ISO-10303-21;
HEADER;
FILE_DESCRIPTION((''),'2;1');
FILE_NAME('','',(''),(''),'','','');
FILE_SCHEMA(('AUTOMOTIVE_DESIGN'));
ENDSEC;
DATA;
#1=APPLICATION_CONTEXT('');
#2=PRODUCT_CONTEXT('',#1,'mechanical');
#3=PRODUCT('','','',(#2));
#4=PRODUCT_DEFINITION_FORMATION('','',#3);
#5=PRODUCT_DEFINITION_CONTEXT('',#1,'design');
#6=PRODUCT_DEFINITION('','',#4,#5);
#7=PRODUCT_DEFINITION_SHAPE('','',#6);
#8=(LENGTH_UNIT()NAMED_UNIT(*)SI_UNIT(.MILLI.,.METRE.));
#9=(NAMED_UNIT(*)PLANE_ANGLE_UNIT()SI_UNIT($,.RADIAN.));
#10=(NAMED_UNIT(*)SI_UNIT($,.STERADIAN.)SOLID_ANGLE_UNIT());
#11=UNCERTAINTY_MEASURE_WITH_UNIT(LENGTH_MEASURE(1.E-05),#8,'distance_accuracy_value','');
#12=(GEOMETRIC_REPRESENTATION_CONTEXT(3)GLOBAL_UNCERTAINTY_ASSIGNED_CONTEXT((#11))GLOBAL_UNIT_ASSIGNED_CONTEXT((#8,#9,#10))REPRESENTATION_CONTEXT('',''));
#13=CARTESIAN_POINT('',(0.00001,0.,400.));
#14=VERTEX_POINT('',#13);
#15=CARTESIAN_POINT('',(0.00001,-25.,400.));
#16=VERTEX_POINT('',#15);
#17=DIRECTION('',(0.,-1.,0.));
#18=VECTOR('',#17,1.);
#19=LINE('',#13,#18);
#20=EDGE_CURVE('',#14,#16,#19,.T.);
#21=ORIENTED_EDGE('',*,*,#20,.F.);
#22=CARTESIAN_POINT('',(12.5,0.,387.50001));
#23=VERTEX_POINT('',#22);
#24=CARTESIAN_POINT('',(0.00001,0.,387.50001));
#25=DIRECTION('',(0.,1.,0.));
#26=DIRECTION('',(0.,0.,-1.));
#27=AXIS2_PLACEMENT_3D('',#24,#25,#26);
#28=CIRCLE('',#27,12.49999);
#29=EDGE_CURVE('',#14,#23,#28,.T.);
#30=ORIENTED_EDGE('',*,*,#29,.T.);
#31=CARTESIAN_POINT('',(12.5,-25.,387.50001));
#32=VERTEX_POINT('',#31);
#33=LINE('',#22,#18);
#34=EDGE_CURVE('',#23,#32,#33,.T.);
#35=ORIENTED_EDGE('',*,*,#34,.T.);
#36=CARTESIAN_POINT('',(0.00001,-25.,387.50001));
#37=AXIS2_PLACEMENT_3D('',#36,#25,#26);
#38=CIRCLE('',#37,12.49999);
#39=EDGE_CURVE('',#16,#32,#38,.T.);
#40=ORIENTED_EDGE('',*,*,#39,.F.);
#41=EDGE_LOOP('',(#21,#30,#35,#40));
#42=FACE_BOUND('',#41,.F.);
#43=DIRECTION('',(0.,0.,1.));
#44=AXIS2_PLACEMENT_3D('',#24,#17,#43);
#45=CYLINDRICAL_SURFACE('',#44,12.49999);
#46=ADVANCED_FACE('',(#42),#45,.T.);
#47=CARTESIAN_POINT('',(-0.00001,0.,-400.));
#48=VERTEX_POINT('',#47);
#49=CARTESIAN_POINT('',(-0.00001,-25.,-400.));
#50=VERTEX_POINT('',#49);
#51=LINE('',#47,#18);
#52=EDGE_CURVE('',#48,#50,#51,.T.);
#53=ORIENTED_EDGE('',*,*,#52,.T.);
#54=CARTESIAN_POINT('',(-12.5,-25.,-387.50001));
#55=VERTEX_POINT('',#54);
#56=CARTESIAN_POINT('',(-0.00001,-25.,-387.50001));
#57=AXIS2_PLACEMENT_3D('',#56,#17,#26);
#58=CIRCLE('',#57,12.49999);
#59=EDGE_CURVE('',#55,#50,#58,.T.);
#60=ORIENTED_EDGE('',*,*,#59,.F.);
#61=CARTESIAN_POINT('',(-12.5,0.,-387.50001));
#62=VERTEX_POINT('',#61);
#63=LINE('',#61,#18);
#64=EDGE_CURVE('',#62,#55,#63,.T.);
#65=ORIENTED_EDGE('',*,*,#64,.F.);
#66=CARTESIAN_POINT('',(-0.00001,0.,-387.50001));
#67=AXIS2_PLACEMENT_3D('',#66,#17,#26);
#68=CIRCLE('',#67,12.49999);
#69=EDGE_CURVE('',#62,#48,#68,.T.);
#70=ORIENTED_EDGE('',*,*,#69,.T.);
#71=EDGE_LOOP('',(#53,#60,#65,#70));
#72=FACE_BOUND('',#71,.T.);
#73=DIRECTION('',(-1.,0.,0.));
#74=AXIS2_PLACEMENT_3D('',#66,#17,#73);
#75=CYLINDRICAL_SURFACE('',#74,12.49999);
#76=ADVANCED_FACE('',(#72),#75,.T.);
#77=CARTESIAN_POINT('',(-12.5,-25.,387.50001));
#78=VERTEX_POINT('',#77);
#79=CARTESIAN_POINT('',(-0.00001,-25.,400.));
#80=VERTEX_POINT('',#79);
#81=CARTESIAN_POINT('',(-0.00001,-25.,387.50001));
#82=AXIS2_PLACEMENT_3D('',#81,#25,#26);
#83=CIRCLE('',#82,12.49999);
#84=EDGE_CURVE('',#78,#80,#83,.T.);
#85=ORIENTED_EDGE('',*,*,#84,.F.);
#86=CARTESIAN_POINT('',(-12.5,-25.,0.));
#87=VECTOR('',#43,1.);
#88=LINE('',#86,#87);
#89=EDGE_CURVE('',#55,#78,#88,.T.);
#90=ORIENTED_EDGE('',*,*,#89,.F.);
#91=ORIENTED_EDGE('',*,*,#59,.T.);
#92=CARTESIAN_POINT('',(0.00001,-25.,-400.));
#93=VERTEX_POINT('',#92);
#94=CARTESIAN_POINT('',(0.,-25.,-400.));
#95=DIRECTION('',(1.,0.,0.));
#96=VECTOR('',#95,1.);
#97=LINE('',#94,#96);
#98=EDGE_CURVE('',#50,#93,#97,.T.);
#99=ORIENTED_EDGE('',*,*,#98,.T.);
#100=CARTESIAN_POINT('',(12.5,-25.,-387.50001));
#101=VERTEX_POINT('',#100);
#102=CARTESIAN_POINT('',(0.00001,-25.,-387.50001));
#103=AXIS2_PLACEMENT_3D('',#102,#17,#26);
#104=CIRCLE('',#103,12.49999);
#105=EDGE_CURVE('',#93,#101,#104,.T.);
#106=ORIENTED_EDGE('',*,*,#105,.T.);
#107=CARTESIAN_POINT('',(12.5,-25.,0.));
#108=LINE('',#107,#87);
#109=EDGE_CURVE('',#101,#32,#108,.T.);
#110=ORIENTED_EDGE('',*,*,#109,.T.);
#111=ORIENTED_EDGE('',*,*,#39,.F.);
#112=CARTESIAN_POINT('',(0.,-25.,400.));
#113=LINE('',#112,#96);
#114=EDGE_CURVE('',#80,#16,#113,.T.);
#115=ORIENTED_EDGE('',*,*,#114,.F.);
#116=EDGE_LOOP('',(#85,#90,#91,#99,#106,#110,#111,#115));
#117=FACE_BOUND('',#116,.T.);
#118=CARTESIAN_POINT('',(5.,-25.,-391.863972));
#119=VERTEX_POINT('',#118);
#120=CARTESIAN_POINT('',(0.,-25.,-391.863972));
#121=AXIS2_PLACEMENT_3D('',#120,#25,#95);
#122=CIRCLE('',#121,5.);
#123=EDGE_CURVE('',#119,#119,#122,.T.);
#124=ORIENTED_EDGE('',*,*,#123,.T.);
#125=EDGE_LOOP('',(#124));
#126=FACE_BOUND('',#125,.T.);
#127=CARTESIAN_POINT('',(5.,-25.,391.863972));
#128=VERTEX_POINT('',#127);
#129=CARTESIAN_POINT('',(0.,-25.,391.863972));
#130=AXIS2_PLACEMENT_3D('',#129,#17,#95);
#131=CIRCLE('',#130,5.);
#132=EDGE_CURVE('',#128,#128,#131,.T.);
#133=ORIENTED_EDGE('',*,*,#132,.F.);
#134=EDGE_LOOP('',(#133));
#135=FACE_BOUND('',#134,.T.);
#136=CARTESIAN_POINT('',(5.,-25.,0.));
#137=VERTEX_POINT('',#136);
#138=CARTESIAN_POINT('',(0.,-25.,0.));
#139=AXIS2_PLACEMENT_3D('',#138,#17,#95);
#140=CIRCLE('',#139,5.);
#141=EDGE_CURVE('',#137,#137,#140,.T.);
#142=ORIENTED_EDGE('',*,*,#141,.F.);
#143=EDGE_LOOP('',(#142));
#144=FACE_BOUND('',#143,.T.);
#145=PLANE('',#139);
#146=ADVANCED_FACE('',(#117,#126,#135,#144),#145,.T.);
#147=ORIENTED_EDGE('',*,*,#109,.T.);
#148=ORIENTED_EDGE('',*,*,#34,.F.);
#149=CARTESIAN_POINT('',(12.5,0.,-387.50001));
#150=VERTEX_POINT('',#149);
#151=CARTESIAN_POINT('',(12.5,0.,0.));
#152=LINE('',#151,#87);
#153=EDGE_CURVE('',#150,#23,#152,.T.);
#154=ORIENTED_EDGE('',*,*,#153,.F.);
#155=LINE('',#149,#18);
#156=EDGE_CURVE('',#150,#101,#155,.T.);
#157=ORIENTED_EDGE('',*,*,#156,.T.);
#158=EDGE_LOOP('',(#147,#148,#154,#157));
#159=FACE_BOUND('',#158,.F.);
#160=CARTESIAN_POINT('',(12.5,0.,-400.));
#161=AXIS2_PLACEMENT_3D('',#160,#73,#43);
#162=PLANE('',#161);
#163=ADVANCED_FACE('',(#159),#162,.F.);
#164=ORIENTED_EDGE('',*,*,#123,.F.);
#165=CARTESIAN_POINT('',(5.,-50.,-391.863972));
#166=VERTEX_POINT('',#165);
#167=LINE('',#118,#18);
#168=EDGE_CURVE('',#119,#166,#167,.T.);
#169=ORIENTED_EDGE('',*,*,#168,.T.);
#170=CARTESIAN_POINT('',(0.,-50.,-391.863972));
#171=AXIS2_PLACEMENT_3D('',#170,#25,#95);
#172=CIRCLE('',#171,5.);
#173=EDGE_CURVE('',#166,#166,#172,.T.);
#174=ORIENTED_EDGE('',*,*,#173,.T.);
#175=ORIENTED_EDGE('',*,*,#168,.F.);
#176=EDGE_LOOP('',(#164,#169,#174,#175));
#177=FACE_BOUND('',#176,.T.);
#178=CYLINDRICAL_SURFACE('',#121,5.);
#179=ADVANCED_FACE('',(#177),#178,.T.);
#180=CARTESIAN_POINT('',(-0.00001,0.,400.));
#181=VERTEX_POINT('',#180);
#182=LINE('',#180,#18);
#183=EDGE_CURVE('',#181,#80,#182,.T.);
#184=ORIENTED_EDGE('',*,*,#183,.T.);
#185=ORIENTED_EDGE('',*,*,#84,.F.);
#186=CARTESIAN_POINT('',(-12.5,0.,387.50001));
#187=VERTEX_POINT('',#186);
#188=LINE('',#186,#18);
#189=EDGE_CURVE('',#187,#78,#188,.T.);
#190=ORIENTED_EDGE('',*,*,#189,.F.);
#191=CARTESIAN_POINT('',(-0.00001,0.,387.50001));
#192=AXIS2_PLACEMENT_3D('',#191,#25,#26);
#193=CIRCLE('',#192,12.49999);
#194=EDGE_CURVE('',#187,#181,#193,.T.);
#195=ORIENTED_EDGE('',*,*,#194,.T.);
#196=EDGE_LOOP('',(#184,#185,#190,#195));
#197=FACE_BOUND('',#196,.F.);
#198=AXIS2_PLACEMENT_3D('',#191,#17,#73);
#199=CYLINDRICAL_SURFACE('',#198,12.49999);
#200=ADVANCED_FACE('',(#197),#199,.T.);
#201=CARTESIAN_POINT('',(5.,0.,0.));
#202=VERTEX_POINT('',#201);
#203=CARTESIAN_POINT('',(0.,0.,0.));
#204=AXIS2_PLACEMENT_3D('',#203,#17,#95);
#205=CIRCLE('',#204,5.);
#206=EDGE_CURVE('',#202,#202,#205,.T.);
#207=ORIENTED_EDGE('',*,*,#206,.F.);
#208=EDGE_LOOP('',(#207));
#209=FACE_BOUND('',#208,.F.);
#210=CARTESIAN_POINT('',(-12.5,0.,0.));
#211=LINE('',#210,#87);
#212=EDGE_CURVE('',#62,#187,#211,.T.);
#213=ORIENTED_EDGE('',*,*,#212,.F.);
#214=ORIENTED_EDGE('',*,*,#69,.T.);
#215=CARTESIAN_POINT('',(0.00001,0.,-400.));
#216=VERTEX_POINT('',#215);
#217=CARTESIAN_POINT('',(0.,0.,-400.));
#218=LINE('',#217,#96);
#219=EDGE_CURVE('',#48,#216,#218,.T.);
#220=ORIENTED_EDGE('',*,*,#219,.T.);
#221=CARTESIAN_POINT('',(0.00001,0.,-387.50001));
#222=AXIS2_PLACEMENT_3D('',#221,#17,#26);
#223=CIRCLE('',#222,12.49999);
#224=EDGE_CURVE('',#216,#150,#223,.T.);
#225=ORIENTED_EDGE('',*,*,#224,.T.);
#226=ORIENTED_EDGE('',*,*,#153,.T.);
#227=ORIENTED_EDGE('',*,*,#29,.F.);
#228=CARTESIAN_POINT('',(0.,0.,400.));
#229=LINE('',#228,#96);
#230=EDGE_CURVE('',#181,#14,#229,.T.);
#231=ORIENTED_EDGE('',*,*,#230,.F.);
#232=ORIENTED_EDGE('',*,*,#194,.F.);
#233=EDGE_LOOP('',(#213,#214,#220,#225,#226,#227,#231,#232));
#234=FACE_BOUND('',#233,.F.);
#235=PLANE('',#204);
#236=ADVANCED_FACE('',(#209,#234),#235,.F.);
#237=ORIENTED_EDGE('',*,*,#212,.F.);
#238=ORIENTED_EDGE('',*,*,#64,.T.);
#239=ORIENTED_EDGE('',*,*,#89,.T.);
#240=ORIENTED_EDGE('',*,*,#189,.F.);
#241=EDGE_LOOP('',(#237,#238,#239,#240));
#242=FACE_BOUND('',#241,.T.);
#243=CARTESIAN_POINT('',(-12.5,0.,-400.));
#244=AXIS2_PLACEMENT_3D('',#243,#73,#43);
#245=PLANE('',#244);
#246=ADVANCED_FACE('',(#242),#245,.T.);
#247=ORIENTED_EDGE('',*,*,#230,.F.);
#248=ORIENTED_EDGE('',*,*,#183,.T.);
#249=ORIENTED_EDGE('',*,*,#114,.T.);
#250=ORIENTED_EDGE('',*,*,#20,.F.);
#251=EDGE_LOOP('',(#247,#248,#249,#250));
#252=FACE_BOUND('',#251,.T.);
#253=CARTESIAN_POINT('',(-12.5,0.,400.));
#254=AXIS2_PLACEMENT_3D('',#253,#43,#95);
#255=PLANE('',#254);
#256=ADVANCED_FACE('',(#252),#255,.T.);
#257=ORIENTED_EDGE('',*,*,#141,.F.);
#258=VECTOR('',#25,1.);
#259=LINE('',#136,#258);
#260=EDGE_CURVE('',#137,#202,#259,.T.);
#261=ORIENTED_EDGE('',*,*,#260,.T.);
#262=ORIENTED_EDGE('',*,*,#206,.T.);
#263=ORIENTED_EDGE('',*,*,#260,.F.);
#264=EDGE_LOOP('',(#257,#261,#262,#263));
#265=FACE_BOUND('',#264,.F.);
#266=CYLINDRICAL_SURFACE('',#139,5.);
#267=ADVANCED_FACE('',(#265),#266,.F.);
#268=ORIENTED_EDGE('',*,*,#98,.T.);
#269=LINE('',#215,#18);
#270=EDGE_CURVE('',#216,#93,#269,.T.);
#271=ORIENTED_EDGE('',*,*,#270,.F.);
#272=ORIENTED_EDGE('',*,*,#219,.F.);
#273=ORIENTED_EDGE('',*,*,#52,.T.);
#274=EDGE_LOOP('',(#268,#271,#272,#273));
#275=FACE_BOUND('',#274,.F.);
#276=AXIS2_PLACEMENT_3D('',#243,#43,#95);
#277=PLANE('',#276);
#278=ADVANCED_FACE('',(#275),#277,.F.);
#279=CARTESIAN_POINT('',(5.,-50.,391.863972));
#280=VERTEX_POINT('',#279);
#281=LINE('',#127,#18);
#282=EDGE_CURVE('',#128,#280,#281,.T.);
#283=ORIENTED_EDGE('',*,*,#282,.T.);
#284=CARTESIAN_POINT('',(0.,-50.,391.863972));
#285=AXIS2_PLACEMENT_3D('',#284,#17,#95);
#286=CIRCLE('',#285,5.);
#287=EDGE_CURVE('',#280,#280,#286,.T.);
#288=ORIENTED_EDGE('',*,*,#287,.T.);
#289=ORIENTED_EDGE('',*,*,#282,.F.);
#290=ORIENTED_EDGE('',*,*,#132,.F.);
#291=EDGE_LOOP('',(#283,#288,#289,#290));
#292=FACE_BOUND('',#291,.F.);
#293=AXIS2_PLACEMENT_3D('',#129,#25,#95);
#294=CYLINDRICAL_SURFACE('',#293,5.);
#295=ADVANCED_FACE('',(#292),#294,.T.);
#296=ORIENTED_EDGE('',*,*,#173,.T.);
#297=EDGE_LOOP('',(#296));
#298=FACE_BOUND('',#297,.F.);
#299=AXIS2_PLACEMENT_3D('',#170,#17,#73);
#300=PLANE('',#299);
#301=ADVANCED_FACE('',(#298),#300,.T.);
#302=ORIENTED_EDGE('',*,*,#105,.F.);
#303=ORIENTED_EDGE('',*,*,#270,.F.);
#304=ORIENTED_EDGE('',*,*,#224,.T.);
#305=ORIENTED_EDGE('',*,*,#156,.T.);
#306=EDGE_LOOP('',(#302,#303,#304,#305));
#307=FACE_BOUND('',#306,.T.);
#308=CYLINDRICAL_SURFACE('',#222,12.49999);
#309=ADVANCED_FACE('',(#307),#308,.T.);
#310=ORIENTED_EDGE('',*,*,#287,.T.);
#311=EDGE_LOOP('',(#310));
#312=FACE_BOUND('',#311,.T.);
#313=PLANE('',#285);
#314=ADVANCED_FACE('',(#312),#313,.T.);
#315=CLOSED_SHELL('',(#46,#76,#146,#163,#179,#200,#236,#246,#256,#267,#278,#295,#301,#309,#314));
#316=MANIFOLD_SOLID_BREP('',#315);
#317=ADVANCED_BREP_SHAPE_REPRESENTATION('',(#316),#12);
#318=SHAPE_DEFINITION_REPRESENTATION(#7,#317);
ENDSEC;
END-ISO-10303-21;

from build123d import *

# Parameters (mm, degrees)
F0_W     = 25
F0_H     = 800
F1_DEPTH = 25
F2_R     = 5
F3_DEPTH = 25
F4_R     = 5
F5_DEPTH = 25
F6_R     = 12.49999
F7_R     = 12.49999


# Not quite as in the source:
# - a fillet or chamfer is up to 0.001 mm smaller than in the source, because OpenCascade refuses the exact size
# - a pattern or mirror of a feature is missing from the dataset's text; its kind, count and spacing are read off the source's solid


with BuildPart() as f1:
    # F0 (on Front) → F1 (new body)
    with BuildSketch(Plane.XZ):
        Rectangle(F0_W, F0_H)
    extrude(amount=F1_DEPTH)

    # F2 (on face) → F3 (join)
    with BuildSketch(Plane.XZ.offset(25)):
        with Locations((0, 391.8639719486)):
            Circle(F2_R)
    f3 = extrude(amount=F3_DEPTH)

    # F3_copies: F3 across plane
    add(f3.mirror(Plane(origin=(0, 0, 0), x_dir=(-1, 0, 0), z_dir=(0, 0, -1))))

    # F4 (on face) → F5 (cut)
    with BuildSketch(Plane.XZ.offset(25)):
        Circle(F4_R)
    extrude(amount=-F5_DEPTH, mode=Mode.SUBTRACT)

    # F6 (radius 12.5 in the source; OpenCascade refuses exactly that, so slightly less here)
    f6_edges = [f1.edges().sort_by_distance(p)[0] for p in [
        (-12.5, -12.5, 400),
        (12.5, -12.5, 400),
    ]]
    fillet(f6_edges, radius=F6_R)

    # F7 (radius 12.5 in the source; OpenCascade refuses exactly that, so slightly less here)
    f7_edges = [f1.edges().sort_by_distance(p)[0] for p in [
        (12.5, -12.5, -400),
        (-12.5, -12.5, -400),
    ]]
    fillet(f7_edges, radius=F7_R)


solid = f1.part
